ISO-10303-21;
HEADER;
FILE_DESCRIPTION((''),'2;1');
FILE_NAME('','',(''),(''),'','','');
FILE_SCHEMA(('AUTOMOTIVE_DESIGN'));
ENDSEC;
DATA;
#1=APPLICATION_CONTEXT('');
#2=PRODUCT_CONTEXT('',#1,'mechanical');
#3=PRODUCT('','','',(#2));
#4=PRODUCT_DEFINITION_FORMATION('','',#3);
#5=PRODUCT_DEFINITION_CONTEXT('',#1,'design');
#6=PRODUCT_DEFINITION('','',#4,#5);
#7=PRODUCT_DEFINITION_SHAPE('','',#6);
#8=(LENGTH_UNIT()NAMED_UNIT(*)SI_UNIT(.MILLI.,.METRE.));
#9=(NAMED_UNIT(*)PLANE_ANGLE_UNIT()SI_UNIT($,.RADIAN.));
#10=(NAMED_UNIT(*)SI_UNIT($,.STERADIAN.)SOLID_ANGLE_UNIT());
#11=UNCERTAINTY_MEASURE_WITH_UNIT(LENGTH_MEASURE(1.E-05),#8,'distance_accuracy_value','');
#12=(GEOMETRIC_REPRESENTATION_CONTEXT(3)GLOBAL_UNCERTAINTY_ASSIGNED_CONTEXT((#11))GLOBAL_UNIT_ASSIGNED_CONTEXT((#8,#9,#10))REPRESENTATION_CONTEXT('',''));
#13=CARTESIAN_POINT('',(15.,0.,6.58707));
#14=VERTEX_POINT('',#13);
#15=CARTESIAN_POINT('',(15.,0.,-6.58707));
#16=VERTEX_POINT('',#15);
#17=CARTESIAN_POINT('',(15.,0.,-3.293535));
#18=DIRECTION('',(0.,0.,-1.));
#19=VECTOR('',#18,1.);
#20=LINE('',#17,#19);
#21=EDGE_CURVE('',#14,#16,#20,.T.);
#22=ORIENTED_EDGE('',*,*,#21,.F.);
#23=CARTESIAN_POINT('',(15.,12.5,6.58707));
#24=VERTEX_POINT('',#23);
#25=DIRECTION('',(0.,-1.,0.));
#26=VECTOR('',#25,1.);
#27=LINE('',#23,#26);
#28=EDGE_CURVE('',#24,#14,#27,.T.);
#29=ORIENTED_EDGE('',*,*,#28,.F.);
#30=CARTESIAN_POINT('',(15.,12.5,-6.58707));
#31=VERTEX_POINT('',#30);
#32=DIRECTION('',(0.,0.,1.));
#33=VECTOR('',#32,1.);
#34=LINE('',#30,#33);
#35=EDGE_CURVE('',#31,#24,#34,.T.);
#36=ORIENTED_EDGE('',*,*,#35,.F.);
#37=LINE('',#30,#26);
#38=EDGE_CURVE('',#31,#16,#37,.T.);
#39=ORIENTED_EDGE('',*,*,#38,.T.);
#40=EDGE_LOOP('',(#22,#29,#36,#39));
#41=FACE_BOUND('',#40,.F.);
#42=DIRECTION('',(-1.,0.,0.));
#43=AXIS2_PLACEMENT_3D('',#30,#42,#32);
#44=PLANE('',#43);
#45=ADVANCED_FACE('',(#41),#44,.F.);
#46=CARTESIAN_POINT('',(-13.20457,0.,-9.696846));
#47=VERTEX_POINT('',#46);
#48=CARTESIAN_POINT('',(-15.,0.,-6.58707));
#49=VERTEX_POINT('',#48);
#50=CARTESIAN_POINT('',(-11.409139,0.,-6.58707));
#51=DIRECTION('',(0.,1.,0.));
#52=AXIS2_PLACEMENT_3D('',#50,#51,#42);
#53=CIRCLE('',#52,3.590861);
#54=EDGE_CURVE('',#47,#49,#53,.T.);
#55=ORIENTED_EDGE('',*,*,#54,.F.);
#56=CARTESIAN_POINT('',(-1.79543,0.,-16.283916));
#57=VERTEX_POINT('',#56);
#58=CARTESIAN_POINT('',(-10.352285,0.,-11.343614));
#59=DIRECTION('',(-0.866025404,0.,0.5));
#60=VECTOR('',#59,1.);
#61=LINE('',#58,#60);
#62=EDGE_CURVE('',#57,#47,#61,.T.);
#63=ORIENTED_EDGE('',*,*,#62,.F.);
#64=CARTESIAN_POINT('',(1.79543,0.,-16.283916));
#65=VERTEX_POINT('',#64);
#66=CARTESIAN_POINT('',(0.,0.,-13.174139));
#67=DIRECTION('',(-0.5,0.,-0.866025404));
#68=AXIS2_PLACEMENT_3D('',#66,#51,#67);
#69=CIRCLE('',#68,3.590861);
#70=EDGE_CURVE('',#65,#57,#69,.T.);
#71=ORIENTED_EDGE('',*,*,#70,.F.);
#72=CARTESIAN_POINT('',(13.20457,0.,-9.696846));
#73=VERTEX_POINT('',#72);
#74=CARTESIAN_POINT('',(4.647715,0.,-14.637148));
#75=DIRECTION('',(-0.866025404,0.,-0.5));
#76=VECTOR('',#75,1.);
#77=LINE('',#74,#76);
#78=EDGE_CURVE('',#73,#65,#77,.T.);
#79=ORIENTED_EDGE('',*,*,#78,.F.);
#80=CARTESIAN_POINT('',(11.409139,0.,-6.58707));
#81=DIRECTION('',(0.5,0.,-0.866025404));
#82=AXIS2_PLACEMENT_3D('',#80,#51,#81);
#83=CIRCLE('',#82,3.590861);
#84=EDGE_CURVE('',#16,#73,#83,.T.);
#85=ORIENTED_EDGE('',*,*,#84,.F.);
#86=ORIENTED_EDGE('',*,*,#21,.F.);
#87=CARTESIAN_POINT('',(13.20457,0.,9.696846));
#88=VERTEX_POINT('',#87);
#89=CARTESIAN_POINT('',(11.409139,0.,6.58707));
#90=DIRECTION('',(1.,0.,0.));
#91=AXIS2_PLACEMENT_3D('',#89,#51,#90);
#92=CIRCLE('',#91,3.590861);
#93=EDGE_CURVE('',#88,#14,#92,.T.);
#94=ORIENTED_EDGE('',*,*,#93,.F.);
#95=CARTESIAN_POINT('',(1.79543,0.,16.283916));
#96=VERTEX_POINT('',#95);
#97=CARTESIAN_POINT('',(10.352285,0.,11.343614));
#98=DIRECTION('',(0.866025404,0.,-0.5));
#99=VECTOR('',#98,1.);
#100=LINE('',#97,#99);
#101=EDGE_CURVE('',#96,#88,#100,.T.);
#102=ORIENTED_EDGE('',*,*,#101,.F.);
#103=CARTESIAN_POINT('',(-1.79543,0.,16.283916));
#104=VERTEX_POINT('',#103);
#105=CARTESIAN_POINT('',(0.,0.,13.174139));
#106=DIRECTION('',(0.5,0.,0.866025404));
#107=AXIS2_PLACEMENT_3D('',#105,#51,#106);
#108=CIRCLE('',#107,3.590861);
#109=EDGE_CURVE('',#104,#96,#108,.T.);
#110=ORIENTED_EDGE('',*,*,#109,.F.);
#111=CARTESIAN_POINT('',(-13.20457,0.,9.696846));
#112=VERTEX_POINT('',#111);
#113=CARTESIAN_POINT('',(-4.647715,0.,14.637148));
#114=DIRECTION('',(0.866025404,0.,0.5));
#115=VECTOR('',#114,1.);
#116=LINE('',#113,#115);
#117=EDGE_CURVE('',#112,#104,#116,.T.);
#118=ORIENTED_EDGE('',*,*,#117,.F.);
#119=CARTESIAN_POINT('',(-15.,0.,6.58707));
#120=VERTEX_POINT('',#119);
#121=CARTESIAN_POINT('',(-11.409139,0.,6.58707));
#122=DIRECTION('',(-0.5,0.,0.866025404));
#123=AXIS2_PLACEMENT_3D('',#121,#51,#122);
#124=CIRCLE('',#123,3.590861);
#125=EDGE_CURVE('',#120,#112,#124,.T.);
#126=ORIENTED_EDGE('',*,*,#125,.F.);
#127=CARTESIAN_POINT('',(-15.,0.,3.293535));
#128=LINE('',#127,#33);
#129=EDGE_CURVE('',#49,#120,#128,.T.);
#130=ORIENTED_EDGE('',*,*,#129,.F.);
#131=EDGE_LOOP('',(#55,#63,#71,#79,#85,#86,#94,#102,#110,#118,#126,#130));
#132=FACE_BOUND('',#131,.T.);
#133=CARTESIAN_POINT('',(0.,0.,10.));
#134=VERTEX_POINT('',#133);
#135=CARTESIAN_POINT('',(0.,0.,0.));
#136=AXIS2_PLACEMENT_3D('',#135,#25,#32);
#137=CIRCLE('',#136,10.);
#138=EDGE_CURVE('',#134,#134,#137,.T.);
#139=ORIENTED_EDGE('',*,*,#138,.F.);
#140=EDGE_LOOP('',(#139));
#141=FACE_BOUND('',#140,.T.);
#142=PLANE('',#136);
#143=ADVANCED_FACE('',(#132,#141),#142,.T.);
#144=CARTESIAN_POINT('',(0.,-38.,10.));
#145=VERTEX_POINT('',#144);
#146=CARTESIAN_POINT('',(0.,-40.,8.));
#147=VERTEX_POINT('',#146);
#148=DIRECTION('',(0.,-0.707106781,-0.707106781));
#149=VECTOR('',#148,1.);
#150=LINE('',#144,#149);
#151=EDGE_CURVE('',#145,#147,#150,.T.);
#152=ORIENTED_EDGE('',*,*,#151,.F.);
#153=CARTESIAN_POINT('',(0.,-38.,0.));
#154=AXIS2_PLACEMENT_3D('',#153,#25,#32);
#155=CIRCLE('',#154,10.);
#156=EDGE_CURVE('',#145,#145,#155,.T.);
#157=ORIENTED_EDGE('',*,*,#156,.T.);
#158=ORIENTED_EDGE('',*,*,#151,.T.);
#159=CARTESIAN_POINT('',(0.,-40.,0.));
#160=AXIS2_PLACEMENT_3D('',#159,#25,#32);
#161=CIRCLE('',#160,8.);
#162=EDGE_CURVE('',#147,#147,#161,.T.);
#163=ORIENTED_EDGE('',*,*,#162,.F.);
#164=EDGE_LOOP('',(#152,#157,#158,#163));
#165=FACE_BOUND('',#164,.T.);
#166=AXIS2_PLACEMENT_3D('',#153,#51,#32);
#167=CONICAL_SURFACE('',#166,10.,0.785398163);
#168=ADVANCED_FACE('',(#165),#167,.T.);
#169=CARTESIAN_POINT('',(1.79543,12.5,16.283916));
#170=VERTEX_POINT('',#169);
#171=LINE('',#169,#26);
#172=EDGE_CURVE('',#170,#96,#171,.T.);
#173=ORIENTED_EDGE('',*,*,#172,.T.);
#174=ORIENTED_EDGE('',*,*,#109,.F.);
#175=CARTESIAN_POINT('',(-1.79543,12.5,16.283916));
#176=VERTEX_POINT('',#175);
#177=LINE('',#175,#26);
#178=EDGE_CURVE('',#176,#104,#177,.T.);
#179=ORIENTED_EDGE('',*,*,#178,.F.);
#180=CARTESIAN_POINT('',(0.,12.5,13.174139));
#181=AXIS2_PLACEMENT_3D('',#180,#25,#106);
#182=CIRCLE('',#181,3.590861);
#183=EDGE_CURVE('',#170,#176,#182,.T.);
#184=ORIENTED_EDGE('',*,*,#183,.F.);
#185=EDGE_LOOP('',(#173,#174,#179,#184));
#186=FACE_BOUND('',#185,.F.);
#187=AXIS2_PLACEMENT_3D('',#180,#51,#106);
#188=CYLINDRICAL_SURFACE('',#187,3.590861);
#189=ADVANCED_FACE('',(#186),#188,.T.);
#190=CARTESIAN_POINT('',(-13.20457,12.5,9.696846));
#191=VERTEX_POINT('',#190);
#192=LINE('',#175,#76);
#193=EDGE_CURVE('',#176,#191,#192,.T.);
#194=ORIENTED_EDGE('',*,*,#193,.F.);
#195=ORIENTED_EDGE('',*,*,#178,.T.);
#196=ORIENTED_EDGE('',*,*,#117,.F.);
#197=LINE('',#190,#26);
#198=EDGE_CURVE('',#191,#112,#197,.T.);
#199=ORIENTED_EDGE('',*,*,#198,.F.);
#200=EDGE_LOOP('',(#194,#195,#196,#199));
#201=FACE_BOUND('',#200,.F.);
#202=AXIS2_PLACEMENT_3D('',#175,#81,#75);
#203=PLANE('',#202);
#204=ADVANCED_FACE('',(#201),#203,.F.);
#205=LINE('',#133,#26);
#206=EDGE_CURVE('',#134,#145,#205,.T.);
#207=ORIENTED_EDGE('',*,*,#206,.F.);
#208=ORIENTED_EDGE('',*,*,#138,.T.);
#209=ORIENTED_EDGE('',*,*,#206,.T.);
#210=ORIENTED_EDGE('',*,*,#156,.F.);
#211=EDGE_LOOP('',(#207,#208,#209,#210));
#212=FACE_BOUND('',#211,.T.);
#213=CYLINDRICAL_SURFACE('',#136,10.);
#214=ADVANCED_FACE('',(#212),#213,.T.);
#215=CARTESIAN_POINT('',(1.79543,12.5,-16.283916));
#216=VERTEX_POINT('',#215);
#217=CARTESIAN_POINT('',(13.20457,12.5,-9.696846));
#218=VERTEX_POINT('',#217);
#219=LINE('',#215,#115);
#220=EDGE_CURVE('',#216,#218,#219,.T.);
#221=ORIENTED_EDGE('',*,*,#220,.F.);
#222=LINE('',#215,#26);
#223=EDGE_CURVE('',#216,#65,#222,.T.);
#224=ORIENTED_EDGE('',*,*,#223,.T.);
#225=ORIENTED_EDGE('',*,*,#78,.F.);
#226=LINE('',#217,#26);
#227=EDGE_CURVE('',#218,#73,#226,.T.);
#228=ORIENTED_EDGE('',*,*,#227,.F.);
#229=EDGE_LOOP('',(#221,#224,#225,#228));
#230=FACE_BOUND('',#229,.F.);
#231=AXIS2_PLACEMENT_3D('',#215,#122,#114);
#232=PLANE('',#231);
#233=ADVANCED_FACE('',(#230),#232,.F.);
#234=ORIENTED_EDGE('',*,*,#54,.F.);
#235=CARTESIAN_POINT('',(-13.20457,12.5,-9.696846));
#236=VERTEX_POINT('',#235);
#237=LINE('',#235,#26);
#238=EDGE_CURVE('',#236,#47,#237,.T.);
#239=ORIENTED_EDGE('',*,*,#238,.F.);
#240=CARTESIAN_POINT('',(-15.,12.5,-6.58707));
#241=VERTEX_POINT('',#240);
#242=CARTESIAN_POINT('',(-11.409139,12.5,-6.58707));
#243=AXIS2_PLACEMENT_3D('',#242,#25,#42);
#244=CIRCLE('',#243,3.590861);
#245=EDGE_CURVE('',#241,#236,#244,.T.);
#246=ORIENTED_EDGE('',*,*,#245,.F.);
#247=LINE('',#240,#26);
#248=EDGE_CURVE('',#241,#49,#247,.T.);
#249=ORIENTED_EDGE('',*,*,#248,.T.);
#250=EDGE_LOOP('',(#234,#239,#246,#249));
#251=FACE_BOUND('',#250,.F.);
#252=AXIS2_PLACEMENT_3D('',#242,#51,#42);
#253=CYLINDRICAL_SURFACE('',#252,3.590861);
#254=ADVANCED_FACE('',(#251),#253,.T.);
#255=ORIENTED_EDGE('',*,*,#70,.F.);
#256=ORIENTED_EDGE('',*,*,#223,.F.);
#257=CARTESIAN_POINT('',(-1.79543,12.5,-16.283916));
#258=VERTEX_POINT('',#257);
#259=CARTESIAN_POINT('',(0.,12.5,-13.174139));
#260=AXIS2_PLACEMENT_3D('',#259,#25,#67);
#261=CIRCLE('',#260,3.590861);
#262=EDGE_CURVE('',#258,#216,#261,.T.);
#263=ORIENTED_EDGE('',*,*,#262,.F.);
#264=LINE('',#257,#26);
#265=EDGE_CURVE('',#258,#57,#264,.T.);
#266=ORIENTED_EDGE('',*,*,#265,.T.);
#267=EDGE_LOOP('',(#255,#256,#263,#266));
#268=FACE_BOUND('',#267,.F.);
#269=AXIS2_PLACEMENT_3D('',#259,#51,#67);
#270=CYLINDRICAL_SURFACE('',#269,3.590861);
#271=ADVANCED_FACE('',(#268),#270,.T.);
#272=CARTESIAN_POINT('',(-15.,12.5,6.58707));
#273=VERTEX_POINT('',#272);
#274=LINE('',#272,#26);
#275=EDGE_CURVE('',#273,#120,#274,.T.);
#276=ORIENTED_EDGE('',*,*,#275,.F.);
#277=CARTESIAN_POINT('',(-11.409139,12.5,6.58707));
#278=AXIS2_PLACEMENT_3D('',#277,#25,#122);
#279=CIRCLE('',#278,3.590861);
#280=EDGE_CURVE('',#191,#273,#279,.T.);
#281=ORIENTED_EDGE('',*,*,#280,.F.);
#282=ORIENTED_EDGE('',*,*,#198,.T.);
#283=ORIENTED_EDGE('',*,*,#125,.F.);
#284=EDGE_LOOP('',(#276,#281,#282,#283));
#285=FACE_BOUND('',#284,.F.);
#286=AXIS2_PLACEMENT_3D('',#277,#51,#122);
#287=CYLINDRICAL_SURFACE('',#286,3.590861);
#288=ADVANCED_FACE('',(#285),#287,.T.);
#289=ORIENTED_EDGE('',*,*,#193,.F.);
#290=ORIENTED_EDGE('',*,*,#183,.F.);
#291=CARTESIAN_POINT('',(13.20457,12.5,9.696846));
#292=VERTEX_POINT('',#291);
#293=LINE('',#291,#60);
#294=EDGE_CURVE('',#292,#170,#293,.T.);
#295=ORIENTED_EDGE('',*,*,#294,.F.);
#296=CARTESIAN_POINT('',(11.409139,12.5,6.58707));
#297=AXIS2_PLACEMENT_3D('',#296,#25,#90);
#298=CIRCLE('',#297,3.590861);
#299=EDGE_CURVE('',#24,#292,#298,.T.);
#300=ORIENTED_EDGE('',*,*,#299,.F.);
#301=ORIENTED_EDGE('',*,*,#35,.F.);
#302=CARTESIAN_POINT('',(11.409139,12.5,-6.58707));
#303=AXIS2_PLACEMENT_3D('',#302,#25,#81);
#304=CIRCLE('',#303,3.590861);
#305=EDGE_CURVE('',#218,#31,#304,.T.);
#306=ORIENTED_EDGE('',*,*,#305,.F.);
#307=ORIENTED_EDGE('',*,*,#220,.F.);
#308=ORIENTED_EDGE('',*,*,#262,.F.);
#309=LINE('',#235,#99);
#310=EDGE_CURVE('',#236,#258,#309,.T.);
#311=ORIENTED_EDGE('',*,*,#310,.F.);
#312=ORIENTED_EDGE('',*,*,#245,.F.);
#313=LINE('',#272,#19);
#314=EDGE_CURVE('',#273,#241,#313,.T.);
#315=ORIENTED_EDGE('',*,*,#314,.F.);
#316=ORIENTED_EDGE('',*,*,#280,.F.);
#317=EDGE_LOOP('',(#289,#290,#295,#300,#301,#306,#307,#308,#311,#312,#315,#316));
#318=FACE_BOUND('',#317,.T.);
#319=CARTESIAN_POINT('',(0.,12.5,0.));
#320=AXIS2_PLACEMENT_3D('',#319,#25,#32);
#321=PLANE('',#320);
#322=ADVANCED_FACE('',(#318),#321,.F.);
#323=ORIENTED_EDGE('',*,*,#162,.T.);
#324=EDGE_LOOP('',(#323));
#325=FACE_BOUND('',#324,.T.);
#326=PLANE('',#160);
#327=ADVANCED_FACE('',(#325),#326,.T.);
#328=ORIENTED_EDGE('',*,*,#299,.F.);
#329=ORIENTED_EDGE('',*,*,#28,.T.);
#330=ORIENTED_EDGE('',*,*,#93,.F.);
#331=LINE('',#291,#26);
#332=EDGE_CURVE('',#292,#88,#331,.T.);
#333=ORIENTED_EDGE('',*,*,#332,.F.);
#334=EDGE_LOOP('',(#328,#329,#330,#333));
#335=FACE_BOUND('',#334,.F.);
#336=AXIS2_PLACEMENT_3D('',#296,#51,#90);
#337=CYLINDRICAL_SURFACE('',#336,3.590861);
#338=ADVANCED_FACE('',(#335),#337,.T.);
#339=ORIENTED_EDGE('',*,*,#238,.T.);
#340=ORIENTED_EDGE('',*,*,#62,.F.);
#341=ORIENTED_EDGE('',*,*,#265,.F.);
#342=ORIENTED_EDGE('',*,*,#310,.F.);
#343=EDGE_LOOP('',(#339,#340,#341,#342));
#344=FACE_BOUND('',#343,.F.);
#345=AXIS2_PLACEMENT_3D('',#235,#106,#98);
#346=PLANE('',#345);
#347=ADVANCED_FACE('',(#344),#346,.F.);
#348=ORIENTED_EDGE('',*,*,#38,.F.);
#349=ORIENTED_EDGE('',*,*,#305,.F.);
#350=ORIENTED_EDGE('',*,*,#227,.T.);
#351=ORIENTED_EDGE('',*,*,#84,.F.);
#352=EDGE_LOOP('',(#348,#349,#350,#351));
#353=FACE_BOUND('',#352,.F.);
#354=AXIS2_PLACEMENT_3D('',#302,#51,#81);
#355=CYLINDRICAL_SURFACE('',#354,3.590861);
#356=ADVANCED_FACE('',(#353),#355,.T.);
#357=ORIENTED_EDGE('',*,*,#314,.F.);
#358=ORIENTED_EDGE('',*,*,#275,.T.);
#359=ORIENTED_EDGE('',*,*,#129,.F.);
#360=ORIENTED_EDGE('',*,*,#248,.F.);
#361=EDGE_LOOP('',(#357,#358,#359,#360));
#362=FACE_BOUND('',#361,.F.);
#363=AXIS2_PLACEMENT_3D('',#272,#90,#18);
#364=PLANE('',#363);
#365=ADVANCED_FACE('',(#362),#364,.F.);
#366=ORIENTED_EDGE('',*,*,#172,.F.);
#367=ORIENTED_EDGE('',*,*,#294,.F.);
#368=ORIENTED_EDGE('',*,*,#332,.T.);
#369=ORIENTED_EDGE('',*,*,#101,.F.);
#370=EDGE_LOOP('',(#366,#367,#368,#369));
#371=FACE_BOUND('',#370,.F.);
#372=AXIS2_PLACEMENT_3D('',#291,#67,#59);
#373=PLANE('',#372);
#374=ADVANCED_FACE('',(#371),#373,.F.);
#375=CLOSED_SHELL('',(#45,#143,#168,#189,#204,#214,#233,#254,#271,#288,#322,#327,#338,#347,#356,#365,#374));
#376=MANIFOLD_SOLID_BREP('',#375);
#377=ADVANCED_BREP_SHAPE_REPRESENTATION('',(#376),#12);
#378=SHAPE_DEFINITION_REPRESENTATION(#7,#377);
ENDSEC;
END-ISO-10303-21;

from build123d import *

# Parameters (mm, degrees)
F2_R     = 25.1475
F3_DEPTH = 25


# Not quite as in the source:
# - a feature names something its author has since deleted; it is built from what else it names


with BuildPart() as f1:
    # F0 (on Right) → F1 (revolve)
    with BuildSketch(Plane.YZ):
        Polygon((0, 25.1475), (0, 10), (-38, 10), (-40, 8), (-40, 0), (12.5, 0), (12.5, 25.1475), align=None)
    revolve(axis=Axis((0, -13.75, 0), (0, -1, 0)))

    # F2 (on face) → F3 (cut)
    with BuildSketch(Plane(origin=(0, 12.5, 0), x_dir=(-1, 0, 0), z_dir=(0, 1, 0))):
        Circle(F2_R)
        with BuildLine():
            ThreePointArc((1.7954303246, -16.2839158944), (0, -16.765), (-1.7954303246, -16.2839158944))
            Line((-1.7954303246, -16.2839158944), (-13.2045696754, -9.6968462191))
            ThreePointArc((-13.2045696754, -9.6968462191), (-14.5189158944, -8.3825), (-15, -6.5870696754))
            Line((-15, -6.5870696754), (-15, 6.5870696754))
            ThreePointArc((-15, 6.5870696754), (-14.5189158944, 8.3825), (-13.2045696754, 9.6968462191))
            Line((-13.2045696754, 9.6968462191), (-1.7954303246, 16.2839158944))
            ThreePointArc((-1.7954303246, 16.2839158944), (0, 16.765), (1.7954303246, 16.2839158944))
            Line((1.7954303246, 16.2839158944), (13.2045696754, 9.6968462191))
            ThreePointArc((13.2045696754, 9.6968462191), (14.5189158944, 8.3825), (15, 6.5870696754))
            Line((15, 6.5870696754), (15, -6.5870696754))
            ThreePointArc((15, -6.5870696754), (14.5189158944, -8.3825), (13.2045696754, -9.6968462191))
            Line((13.2045696754, -9.6968462191), (1.7954303246, -16.2839158944))
        make_face(mode=Mode.SUBTRACT)
    extrude(amount=-F3_DEPTH, mode=Mode.SUBTRACT)


solid = f1.part
